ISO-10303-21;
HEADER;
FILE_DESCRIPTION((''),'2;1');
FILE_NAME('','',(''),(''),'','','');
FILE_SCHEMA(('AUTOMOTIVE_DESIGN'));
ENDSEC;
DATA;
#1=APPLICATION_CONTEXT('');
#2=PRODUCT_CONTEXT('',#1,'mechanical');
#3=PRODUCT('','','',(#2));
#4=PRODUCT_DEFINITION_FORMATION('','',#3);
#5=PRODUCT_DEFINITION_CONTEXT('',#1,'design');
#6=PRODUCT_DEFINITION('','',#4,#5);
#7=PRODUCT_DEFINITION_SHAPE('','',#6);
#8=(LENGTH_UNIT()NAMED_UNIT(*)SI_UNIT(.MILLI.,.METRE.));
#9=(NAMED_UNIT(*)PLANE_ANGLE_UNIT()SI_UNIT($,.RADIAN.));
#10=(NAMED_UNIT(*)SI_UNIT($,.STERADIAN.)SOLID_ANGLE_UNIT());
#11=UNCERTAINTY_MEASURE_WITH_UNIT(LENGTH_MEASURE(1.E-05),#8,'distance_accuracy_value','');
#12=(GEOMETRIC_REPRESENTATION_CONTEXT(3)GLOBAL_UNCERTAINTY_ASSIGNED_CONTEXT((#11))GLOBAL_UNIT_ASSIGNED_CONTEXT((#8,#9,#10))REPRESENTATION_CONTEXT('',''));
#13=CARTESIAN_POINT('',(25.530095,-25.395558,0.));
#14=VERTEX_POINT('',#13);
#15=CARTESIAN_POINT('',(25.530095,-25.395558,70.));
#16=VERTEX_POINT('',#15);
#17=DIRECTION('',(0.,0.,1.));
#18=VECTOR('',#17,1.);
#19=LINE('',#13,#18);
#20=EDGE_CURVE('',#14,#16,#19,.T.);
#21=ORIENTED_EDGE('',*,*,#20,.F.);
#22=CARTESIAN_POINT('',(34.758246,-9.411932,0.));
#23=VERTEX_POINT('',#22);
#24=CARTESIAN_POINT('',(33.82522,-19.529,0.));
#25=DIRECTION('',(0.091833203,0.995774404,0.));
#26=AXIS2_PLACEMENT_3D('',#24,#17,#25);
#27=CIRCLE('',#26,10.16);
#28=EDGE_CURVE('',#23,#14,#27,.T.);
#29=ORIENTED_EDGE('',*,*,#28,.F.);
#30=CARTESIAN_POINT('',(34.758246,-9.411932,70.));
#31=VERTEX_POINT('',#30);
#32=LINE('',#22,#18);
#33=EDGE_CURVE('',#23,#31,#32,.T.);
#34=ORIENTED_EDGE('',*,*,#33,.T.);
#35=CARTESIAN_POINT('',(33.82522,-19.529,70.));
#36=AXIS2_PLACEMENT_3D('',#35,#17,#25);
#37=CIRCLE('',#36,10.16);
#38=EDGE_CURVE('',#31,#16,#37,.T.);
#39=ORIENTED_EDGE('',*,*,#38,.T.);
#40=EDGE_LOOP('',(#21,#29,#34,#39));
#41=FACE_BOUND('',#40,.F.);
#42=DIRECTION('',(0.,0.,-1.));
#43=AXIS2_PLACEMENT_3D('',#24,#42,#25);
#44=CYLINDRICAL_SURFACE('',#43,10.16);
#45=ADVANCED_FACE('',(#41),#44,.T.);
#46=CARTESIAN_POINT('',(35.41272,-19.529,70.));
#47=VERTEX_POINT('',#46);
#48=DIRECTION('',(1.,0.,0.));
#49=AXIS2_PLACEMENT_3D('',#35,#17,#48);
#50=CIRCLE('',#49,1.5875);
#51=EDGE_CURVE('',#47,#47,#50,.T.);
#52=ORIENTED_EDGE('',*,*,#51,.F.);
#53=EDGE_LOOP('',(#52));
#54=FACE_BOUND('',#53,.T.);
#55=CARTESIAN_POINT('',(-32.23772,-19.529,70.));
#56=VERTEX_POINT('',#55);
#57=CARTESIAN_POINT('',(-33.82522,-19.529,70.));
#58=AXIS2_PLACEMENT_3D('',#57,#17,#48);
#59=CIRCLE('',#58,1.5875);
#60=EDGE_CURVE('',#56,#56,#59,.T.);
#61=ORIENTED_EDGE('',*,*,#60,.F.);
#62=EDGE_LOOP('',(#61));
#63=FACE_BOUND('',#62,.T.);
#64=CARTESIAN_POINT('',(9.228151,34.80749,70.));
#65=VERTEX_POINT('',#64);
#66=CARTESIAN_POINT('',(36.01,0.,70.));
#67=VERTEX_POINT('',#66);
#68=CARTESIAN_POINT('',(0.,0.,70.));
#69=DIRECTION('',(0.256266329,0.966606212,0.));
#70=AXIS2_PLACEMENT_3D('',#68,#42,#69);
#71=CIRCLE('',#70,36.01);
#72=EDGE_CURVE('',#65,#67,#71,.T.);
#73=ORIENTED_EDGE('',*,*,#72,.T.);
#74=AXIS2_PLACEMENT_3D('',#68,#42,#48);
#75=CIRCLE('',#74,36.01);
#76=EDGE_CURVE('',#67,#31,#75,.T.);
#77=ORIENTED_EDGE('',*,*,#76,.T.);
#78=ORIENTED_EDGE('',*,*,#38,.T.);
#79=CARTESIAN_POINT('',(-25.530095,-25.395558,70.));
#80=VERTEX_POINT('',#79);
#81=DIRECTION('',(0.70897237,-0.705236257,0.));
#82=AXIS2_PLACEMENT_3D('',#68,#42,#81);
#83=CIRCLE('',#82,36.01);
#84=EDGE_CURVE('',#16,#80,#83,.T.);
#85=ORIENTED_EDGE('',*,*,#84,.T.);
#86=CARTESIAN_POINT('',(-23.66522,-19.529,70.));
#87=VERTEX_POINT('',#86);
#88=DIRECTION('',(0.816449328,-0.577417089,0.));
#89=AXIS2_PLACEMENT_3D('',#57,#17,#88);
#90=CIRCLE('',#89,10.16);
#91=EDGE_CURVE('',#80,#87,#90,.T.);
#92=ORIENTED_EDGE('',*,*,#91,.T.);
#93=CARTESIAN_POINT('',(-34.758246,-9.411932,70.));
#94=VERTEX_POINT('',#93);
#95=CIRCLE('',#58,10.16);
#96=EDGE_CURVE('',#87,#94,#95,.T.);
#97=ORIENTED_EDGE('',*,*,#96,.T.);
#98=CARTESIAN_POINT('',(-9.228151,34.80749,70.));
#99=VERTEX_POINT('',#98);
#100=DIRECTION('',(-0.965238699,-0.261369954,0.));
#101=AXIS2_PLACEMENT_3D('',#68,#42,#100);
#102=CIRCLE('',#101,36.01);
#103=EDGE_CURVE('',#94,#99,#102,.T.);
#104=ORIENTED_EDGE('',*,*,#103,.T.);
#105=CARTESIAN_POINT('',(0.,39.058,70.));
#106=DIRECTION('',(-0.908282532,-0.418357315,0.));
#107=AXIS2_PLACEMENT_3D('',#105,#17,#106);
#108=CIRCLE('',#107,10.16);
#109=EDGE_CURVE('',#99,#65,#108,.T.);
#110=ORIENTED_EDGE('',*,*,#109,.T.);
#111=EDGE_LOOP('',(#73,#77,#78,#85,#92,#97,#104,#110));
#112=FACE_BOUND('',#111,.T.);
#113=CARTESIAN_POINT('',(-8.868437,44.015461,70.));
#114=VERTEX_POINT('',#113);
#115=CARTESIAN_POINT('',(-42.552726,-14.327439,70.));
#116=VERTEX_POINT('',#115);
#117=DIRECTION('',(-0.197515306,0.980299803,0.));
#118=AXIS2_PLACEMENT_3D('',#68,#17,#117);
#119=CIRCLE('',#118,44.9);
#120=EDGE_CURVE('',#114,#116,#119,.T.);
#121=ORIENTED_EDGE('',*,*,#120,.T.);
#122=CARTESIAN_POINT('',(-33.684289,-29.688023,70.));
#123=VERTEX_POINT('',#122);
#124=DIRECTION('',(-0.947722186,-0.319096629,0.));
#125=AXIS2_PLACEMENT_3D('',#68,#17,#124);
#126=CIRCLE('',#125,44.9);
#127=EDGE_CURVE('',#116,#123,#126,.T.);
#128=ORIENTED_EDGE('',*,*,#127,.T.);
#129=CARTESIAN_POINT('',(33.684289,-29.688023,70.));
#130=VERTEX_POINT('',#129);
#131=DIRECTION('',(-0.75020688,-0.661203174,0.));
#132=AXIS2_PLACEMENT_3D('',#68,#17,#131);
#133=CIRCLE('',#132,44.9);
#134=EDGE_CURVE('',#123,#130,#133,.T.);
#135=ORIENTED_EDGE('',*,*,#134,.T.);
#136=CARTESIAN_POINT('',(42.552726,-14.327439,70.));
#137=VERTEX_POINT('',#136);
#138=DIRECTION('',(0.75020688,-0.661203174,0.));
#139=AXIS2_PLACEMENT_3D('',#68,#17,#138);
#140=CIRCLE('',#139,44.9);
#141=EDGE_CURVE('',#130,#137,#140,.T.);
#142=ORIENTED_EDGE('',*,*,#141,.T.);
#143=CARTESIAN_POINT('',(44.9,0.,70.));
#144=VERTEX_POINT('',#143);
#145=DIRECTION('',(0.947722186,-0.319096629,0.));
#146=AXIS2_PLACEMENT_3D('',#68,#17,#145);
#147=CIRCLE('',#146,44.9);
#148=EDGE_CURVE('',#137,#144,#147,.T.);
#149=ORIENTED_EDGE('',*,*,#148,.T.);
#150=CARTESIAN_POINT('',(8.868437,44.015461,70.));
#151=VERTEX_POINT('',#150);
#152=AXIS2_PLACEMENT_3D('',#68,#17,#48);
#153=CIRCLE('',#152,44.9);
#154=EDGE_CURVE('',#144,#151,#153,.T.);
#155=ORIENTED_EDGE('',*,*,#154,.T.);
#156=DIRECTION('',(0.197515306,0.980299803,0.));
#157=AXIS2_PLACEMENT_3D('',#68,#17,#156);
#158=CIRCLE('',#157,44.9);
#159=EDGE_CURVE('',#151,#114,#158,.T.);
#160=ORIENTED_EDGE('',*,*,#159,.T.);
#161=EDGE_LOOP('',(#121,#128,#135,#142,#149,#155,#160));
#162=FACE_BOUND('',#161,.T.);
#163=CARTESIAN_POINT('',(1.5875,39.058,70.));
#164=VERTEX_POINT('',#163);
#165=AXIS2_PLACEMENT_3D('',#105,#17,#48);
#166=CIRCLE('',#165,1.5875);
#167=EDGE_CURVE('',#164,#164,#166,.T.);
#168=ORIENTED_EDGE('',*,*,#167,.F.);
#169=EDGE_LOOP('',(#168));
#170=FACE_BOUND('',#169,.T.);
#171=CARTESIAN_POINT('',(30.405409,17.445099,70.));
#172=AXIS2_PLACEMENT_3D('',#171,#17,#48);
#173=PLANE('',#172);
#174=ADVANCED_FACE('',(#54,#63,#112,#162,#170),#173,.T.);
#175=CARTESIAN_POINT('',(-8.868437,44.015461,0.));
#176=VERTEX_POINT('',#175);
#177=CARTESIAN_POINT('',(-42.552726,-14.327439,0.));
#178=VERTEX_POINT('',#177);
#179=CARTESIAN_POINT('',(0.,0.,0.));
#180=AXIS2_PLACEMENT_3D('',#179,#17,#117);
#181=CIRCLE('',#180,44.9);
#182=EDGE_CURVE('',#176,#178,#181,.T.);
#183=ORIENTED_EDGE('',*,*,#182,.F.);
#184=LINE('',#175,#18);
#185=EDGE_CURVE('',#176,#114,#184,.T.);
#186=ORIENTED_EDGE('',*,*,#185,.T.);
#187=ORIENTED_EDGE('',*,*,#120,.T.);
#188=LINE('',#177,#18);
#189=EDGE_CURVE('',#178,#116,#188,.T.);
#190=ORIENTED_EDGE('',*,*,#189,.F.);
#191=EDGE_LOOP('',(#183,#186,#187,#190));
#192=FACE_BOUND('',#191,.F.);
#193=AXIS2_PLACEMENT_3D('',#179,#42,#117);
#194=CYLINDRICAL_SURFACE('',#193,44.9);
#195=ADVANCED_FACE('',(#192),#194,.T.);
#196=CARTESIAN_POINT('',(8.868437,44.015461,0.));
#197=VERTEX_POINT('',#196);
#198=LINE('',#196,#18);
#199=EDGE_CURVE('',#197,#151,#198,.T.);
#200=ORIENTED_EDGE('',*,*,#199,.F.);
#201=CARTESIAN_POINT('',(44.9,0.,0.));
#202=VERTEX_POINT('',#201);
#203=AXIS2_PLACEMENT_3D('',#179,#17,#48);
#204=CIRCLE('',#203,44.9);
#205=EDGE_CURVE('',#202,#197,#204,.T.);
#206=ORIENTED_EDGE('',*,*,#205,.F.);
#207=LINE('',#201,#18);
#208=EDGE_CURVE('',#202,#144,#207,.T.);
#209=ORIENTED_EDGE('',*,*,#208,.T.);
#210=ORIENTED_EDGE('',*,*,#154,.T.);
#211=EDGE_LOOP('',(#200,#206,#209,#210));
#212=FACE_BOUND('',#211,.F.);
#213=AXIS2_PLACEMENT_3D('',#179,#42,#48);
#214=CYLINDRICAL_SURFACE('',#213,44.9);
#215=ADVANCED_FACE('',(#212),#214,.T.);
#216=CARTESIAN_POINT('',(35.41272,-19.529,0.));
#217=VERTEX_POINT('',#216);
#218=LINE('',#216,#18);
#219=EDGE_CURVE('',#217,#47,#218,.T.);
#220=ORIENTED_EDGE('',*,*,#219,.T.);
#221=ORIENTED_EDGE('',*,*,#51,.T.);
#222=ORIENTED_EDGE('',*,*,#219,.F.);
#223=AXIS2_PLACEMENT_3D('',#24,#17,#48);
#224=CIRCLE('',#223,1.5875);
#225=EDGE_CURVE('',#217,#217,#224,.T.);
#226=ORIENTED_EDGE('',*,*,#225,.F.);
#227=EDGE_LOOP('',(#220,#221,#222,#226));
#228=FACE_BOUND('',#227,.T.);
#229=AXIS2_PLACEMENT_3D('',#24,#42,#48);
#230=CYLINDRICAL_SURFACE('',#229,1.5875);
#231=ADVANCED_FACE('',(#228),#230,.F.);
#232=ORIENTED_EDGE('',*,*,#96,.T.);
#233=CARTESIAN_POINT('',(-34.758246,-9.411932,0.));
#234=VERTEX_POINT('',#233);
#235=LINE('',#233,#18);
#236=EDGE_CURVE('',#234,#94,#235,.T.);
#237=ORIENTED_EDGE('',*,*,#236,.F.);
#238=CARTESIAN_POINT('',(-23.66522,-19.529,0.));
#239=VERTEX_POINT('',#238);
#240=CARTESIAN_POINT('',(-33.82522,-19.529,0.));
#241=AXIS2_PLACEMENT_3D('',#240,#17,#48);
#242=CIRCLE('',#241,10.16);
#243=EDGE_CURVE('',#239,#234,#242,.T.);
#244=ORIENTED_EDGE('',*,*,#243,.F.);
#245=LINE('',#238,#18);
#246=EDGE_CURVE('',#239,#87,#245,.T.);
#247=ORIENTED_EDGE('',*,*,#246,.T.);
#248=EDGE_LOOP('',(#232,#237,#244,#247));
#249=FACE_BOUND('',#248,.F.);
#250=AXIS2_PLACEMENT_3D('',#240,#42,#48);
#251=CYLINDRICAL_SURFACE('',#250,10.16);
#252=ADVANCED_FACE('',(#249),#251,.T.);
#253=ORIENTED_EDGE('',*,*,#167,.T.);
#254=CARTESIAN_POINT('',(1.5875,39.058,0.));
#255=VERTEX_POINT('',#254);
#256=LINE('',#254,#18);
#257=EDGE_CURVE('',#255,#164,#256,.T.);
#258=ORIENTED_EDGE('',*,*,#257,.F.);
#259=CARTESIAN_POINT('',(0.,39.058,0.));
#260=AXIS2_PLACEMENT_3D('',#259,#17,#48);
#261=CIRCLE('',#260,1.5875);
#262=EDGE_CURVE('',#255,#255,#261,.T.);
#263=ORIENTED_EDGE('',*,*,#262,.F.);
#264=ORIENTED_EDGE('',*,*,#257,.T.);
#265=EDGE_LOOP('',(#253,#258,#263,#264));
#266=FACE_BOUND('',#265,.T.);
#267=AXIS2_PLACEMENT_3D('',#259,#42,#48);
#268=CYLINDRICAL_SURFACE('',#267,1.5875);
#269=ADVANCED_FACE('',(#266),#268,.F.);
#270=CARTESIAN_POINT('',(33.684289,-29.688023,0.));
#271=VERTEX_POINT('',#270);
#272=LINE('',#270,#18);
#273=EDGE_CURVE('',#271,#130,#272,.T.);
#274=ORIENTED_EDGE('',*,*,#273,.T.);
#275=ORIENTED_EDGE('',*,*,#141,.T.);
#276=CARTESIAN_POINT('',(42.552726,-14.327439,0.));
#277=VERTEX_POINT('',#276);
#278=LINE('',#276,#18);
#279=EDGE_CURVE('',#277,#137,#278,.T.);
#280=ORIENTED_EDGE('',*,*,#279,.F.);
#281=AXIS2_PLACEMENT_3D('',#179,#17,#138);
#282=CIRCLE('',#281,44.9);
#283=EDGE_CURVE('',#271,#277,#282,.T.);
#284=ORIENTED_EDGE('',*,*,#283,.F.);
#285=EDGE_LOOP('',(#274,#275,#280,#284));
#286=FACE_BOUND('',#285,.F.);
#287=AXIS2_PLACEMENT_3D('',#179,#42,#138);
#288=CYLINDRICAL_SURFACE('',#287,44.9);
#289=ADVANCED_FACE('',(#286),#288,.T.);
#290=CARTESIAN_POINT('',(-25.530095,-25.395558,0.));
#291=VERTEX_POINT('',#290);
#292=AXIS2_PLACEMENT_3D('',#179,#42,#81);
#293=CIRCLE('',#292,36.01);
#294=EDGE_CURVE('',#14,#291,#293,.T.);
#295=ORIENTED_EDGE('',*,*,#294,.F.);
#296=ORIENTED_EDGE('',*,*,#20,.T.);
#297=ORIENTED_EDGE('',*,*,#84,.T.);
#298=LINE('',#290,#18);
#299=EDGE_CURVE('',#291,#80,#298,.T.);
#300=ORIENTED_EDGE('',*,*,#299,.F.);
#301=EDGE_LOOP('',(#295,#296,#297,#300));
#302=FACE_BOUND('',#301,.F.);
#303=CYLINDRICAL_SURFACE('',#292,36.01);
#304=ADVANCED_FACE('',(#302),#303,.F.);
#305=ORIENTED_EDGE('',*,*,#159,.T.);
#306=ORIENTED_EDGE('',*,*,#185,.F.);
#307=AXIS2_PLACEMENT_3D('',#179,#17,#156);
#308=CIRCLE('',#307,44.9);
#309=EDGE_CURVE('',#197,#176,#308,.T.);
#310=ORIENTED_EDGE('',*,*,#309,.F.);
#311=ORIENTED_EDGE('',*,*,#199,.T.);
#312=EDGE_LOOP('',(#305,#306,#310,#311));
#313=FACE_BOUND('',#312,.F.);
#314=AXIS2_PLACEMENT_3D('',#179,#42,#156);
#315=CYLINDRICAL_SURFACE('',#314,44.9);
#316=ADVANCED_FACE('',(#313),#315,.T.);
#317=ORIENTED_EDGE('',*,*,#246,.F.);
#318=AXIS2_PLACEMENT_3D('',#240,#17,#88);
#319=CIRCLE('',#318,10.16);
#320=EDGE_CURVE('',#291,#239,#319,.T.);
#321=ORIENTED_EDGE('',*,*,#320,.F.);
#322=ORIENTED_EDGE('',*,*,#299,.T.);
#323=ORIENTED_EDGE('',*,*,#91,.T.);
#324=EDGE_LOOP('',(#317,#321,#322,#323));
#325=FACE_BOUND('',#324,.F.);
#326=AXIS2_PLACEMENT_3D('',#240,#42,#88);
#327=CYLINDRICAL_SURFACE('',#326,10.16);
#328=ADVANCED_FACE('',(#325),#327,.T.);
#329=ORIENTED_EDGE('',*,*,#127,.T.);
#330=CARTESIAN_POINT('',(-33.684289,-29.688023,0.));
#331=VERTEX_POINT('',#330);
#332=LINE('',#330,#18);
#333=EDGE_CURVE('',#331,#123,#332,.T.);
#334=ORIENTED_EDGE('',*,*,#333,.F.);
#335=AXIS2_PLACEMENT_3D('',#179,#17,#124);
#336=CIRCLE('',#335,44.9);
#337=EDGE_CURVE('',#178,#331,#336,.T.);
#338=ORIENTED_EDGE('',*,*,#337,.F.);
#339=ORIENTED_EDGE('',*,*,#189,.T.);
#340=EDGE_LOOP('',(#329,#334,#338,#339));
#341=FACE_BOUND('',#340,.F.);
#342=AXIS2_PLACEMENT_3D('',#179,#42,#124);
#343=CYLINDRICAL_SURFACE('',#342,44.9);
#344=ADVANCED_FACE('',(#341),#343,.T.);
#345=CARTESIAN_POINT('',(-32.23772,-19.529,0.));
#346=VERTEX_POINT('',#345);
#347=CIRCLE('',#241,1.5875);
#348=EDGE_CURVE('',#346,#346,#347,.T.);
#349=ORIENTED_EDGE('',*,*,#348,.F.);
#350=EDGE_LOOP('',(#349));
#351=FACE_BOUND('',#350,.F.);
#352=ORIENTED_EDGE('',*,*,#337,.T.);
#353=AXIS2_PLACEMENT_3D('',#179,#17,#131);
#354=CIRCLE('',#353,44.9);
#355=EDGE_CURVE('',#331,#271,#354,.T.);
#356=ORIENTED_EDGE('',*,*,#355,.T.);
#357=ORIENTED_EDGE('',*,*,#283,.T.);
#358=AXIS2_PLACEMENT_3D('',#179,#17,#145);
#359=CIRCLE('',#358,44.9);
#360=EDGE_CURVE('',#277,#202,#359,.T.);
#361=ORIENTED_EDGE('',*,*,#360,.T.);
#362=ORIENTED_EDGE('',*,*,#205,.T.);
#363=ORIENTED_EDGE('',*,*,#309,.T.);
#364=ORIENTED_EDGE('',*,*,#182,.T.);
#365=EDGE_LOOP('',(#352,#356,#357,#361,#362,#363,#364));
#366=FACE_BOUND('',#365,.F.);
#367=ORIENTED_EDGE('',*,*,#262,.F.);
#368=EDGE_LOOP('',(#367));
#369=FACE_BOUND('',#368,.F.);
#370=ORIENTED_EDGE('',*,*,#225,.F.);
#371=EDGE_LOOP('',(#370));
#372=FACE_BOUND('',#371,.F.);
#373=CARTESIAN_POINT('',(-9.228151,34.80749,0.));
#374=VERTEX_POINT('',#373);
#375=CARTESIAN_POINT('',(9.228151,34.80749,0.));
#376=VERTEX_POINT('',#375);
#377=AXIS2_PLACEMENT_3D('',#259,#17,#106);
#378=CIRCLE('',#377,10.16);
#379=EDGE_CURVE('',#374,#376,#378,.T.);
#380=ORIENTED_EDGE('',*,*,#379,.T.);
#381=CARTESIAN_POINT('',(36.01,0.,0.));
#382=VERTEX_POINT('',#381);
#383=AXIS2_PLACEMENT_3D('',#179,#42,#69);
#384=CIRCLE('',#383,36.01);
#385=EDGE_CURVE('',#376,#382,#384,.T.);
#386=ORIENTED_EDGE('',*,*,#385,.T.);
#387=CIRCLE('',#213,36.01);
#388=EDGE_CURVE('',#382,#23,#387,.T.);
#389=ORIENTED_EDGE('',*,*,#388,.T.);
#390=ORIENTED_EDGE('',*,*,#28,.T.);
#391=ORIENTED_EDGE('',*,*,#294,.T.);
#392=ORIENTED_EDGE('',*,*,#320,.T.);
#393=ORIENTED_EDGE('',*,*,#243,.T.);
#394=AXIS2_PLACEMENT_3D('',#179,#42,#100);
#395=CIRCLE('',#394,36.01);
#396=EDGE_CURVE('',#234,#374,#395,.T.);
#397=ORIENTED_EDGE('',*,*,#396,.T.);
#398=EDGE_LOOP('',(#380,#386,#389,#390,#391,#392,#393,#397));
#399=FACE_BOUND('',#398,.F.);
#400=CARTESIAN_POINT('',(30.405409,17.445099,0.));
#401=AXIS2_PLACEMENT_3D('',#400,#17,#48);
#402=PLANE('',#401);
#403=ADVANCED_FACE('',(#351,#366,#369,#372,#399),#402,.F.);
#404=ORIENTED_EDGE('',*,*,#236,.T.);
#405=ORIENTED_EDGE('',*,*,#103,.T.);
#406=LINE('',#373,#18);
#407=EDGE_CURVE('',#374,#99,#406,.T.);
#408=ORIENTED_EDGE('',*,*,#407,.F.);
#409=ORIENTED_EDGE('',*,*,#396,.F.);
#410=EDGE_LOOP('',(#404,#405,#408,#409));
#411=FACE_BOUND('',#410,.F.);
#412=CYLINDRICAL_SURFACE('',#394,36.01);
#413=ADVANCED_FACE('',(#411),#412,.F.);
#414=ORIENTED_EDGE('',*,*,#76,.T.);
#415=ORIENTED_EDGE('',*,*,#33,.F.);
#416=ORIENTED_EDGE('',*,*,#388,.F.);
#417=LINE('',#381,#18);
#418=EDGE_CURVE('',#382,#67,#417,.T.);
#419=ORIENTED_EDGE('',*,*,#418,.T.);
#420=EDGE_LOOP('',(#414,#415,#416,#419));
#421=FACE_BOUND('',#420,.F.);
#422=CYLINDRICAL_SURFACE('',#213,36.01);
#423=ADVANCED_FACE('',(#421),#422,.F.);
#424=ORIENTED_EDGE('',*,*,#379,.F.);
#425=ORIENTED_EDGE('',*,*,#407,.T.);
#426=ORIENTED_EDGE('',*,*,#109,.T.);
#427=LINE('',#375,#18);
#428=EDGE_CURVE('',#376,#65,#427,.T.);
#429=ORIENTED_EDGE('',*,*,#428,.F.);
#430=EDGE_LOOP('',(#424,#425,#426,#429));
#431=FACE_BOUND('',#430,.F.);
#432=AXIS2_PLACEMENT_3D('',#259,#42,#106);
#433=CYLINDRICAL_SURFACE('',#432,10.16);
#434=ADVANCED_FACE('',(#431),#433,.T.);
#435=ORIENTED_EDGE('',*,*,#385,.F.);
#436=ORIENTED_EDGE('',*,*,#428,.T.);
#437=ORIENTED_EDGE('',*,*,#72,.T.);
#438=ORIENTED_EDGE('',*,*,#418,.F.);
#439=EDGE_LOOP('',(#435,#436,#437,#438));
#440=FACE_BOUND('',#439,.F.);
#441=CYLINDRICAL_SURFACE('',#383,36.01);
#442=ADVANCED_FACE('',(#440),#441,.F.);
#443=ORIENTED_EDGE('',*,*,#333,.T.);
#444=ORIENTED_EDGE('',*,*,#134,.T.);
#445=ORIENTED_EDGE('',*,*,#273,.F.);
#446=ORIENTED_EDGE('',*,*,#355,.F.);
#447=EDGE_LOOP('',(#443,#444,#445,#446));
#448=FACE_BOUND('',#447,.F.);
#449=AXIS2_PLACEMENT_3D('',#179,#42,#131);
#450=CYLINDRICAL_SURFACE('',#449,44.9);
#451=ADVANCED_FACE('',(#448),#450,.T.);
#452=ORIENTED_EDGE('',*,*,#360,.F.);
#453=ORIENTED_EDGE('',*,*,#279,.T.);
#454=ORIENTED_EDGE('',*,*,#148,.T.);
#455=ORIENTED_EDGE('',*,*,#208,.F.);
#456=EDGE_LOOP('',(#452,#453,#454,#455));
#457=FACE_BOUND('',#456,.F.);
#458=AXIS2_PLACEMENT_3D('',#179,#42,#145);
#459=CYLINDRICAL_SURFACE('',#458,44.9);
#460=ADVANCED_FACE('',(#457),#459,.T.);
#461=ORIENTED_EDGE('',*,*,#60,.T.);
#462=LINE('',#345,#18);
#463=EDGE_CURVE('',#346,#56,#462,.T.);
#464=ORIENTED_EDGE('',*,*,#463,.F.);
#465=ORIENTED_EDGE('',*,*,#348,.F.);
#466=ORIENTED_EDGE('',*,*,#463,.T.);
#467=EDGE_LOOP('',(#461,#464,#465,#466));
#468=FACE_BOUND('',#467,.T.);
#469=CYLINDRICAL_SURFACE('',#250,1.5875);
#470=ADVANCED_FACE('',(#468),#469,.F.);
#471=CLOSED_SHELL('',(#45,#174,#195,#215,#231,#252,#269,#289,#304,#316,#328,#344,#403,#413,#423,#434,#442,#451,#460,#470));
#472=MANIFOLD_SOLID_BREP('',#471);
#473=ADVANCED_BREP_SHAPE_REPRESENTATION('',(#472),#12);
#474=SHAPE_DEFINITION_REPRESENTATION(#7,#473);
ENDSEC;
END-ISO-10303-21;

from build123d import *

# Parameters (mm, degrees)
F0_R     = 1.5875
F1_DEPTH = 70


with BuildPart() as f1:
    # F0 (on Top) → F1 (new body)
    with BuildSketch(Plane.XY):
        with BuildLine():
            ThreePointArc((42.5527261375, -14.32743865), (44.3092958846, -7.2592215983), (44.9, 0))
            ThreePointArc((44.9, 0), (34.7433650607, 28.4413182581), (8.8684372267, 44.0154611603))
            ThreePointArc((8.8684372267, 44.0154611603), (9.8318086389, 41.6194720159), (10.16, 39.058))
            ThreePointArc((10.16, 39.058), (9.9243037361, 36.8822713051), (9.2281505209, 34.807489682))
            ThreePointArc((9.2281505209, 34.807489682), (28.53967239, 21.9592167408), (36.01, 0))
            ThreePointArc((36.01, 0), (35.6956896759, -4.7474033498), (34.758245567, -9.4119320599))
            ThreePointArc((34.758245567, -9.4119320599), (39.2448159004, -10.9351892811), (42.5527261375, -14.32743865))
        make_face()
        with BuildLine():
            ThreePointArc((10.16, 39.058), (9.8318086389, 41.6194720159), (8.8684372267, 44.0154611603))
            ThreePointArc((8.8684372267, 44.0154611603), (0, 44.9), (-8.8684372267, 44.0154611603))
            ThreePointArc((-8.8684372267, 44.0154611603), (-10.1522562376, 39.4546021771), (-9.2281505209, 34.807489682))
            ThreePointArc((-9.2281505209, 34.807489682), (0, 36.01), (9.2281505209, 34.807489682))
            ThreePointArc((9.2281505209, 34.807489682), (9.9243037361, 36.8822713051), (10.16, 39.058))
        make_face()
        with Locations((0, 39.058)):
            Circle(F0_R, mode=Mode.SUBTRACT)
        with BuildLine():
            ThreePointArc((33.6842889108, -29.6880225103), (38.8845406299, -22.45), (42.5527261375, -14.32743865))
            ThreePointArc((42.5527261375, -14.32743865), (39.2448159004, -10.9351892811), (34.758245567, -9.4119320599))
            ThreePointArc((34.758245567, -9.4119320599), (31.1855747903, -18.005), (25.5300950461, -25.3955576221))
            ThreePointArc((25.5300950461, -25.3955576221), (29.0925596628, -28.519412896), (33.6842889108, -29.6880225103))
        make_face()
        with Locations((33.825220221, -19.529)):
            Circle(F0_R, mode=Mode.SUBTRACT)
        with BuildLine():
            ThreePointArc((-9.2281505209, 34.807489682), (-10.1522562376, 39.4546021771), (-8.8684372267, 44.0154611603))
            ThreePointArc((-8.8684372267, 44.0154611603), (-38.8845406299, 22.45), (-42.5527261375, -14.32743865))
            ThreePointArc((-42.5527261375, -14.32743865), (-39.2448159004, -10.9351892811), (-34.758245567, -9.4119320599))
            ThreePointArc((-34.758245567, -9.4119320599), (-31.1855747903, 18.005), (-9.2281505209, 34.807489682))
        make_face()
        with BuildLine():
            ThreePointArc((-33.6842889108, -29.6880225103), (0, -44.9), (33.6842889108, -29.6880225103))
            ThreePointArc((33.6842889108, -29.6880225103), (29.0925596628, -28.519412896), (25.5300950461, -25.3955576221))
            ThreePointArc((25.5300950461, -25.3955576221), (0, -36.01), (-25.5300950461, -25.3955576221))
            ThreePointArc((-25.5300950461, -25.3955576221), (-29.0925596628, -28.519412896), (-33.6842889108, -29.6880225103))
        make_face()
        with BuildLine():
            ThreePointArc((25.5300950461, -25.3955576221), (31.1855747903, -18.005), (34.758245567, -9.4119320599))
            ThreePointArc((34.758245567, -9.4119320599), (25.0264021186, -14.449), (25.5300950461, -25.3955576221))
        make_face()
        with BuildLine():
            ThreePointArc((-34.758245567, -9.4119320599), (-39.2448159004, -10.9351892811), (-42.5527261375, -14.32743865))
            ThreePointArc((-42.5527261375, -14.32743865), (-38.8845406299, -22.45), (-33.6842889108, -29.6880225103))
            ThreePointArc((-33.6842889108, -29.6880225103), (-29.0925596628, -28.519412896), (-25.5300950461, -25.3955576221))
            ThreePointArc((-25.5300950461, -25.3955576221), (-31.1855747903, -18.005), (-34.758245567, -9.4119320599))
        make_face()
        with Locations((-33.825220221, -19.529)):
            Circle(F0_R, mode=Mode.SUBTRACT)
        with BuildLine():
            ThreePointArc((9.2281505209, 34.807489682), (0, 36.01), (-9.2281505209, 34.807489682))
            ThreePointArc((-9.2281505209, 34.807489682), (0, 28.898), (9.2281505209, 34.807489682))
        make_face()
        with BuildLine():
            ThreePointArc((-23.665220221, -19.529), (-26.9788320315, -12.0221651971), (-34.758245567, -9.4119320599))
            ThreePointArc((-34.758245567, -9.4119320599), (-31.1855747903, -18.005), (-25.5300950461, -25.3955576221))
            ThreePointArc((-25.5300950461, -25.3955576221), (-24.1426567232, -22.6069155465), (-23.665220221, -19.529))
        make_face()
    extrude(amount=F1_DEPTH)


solid = f1.part
